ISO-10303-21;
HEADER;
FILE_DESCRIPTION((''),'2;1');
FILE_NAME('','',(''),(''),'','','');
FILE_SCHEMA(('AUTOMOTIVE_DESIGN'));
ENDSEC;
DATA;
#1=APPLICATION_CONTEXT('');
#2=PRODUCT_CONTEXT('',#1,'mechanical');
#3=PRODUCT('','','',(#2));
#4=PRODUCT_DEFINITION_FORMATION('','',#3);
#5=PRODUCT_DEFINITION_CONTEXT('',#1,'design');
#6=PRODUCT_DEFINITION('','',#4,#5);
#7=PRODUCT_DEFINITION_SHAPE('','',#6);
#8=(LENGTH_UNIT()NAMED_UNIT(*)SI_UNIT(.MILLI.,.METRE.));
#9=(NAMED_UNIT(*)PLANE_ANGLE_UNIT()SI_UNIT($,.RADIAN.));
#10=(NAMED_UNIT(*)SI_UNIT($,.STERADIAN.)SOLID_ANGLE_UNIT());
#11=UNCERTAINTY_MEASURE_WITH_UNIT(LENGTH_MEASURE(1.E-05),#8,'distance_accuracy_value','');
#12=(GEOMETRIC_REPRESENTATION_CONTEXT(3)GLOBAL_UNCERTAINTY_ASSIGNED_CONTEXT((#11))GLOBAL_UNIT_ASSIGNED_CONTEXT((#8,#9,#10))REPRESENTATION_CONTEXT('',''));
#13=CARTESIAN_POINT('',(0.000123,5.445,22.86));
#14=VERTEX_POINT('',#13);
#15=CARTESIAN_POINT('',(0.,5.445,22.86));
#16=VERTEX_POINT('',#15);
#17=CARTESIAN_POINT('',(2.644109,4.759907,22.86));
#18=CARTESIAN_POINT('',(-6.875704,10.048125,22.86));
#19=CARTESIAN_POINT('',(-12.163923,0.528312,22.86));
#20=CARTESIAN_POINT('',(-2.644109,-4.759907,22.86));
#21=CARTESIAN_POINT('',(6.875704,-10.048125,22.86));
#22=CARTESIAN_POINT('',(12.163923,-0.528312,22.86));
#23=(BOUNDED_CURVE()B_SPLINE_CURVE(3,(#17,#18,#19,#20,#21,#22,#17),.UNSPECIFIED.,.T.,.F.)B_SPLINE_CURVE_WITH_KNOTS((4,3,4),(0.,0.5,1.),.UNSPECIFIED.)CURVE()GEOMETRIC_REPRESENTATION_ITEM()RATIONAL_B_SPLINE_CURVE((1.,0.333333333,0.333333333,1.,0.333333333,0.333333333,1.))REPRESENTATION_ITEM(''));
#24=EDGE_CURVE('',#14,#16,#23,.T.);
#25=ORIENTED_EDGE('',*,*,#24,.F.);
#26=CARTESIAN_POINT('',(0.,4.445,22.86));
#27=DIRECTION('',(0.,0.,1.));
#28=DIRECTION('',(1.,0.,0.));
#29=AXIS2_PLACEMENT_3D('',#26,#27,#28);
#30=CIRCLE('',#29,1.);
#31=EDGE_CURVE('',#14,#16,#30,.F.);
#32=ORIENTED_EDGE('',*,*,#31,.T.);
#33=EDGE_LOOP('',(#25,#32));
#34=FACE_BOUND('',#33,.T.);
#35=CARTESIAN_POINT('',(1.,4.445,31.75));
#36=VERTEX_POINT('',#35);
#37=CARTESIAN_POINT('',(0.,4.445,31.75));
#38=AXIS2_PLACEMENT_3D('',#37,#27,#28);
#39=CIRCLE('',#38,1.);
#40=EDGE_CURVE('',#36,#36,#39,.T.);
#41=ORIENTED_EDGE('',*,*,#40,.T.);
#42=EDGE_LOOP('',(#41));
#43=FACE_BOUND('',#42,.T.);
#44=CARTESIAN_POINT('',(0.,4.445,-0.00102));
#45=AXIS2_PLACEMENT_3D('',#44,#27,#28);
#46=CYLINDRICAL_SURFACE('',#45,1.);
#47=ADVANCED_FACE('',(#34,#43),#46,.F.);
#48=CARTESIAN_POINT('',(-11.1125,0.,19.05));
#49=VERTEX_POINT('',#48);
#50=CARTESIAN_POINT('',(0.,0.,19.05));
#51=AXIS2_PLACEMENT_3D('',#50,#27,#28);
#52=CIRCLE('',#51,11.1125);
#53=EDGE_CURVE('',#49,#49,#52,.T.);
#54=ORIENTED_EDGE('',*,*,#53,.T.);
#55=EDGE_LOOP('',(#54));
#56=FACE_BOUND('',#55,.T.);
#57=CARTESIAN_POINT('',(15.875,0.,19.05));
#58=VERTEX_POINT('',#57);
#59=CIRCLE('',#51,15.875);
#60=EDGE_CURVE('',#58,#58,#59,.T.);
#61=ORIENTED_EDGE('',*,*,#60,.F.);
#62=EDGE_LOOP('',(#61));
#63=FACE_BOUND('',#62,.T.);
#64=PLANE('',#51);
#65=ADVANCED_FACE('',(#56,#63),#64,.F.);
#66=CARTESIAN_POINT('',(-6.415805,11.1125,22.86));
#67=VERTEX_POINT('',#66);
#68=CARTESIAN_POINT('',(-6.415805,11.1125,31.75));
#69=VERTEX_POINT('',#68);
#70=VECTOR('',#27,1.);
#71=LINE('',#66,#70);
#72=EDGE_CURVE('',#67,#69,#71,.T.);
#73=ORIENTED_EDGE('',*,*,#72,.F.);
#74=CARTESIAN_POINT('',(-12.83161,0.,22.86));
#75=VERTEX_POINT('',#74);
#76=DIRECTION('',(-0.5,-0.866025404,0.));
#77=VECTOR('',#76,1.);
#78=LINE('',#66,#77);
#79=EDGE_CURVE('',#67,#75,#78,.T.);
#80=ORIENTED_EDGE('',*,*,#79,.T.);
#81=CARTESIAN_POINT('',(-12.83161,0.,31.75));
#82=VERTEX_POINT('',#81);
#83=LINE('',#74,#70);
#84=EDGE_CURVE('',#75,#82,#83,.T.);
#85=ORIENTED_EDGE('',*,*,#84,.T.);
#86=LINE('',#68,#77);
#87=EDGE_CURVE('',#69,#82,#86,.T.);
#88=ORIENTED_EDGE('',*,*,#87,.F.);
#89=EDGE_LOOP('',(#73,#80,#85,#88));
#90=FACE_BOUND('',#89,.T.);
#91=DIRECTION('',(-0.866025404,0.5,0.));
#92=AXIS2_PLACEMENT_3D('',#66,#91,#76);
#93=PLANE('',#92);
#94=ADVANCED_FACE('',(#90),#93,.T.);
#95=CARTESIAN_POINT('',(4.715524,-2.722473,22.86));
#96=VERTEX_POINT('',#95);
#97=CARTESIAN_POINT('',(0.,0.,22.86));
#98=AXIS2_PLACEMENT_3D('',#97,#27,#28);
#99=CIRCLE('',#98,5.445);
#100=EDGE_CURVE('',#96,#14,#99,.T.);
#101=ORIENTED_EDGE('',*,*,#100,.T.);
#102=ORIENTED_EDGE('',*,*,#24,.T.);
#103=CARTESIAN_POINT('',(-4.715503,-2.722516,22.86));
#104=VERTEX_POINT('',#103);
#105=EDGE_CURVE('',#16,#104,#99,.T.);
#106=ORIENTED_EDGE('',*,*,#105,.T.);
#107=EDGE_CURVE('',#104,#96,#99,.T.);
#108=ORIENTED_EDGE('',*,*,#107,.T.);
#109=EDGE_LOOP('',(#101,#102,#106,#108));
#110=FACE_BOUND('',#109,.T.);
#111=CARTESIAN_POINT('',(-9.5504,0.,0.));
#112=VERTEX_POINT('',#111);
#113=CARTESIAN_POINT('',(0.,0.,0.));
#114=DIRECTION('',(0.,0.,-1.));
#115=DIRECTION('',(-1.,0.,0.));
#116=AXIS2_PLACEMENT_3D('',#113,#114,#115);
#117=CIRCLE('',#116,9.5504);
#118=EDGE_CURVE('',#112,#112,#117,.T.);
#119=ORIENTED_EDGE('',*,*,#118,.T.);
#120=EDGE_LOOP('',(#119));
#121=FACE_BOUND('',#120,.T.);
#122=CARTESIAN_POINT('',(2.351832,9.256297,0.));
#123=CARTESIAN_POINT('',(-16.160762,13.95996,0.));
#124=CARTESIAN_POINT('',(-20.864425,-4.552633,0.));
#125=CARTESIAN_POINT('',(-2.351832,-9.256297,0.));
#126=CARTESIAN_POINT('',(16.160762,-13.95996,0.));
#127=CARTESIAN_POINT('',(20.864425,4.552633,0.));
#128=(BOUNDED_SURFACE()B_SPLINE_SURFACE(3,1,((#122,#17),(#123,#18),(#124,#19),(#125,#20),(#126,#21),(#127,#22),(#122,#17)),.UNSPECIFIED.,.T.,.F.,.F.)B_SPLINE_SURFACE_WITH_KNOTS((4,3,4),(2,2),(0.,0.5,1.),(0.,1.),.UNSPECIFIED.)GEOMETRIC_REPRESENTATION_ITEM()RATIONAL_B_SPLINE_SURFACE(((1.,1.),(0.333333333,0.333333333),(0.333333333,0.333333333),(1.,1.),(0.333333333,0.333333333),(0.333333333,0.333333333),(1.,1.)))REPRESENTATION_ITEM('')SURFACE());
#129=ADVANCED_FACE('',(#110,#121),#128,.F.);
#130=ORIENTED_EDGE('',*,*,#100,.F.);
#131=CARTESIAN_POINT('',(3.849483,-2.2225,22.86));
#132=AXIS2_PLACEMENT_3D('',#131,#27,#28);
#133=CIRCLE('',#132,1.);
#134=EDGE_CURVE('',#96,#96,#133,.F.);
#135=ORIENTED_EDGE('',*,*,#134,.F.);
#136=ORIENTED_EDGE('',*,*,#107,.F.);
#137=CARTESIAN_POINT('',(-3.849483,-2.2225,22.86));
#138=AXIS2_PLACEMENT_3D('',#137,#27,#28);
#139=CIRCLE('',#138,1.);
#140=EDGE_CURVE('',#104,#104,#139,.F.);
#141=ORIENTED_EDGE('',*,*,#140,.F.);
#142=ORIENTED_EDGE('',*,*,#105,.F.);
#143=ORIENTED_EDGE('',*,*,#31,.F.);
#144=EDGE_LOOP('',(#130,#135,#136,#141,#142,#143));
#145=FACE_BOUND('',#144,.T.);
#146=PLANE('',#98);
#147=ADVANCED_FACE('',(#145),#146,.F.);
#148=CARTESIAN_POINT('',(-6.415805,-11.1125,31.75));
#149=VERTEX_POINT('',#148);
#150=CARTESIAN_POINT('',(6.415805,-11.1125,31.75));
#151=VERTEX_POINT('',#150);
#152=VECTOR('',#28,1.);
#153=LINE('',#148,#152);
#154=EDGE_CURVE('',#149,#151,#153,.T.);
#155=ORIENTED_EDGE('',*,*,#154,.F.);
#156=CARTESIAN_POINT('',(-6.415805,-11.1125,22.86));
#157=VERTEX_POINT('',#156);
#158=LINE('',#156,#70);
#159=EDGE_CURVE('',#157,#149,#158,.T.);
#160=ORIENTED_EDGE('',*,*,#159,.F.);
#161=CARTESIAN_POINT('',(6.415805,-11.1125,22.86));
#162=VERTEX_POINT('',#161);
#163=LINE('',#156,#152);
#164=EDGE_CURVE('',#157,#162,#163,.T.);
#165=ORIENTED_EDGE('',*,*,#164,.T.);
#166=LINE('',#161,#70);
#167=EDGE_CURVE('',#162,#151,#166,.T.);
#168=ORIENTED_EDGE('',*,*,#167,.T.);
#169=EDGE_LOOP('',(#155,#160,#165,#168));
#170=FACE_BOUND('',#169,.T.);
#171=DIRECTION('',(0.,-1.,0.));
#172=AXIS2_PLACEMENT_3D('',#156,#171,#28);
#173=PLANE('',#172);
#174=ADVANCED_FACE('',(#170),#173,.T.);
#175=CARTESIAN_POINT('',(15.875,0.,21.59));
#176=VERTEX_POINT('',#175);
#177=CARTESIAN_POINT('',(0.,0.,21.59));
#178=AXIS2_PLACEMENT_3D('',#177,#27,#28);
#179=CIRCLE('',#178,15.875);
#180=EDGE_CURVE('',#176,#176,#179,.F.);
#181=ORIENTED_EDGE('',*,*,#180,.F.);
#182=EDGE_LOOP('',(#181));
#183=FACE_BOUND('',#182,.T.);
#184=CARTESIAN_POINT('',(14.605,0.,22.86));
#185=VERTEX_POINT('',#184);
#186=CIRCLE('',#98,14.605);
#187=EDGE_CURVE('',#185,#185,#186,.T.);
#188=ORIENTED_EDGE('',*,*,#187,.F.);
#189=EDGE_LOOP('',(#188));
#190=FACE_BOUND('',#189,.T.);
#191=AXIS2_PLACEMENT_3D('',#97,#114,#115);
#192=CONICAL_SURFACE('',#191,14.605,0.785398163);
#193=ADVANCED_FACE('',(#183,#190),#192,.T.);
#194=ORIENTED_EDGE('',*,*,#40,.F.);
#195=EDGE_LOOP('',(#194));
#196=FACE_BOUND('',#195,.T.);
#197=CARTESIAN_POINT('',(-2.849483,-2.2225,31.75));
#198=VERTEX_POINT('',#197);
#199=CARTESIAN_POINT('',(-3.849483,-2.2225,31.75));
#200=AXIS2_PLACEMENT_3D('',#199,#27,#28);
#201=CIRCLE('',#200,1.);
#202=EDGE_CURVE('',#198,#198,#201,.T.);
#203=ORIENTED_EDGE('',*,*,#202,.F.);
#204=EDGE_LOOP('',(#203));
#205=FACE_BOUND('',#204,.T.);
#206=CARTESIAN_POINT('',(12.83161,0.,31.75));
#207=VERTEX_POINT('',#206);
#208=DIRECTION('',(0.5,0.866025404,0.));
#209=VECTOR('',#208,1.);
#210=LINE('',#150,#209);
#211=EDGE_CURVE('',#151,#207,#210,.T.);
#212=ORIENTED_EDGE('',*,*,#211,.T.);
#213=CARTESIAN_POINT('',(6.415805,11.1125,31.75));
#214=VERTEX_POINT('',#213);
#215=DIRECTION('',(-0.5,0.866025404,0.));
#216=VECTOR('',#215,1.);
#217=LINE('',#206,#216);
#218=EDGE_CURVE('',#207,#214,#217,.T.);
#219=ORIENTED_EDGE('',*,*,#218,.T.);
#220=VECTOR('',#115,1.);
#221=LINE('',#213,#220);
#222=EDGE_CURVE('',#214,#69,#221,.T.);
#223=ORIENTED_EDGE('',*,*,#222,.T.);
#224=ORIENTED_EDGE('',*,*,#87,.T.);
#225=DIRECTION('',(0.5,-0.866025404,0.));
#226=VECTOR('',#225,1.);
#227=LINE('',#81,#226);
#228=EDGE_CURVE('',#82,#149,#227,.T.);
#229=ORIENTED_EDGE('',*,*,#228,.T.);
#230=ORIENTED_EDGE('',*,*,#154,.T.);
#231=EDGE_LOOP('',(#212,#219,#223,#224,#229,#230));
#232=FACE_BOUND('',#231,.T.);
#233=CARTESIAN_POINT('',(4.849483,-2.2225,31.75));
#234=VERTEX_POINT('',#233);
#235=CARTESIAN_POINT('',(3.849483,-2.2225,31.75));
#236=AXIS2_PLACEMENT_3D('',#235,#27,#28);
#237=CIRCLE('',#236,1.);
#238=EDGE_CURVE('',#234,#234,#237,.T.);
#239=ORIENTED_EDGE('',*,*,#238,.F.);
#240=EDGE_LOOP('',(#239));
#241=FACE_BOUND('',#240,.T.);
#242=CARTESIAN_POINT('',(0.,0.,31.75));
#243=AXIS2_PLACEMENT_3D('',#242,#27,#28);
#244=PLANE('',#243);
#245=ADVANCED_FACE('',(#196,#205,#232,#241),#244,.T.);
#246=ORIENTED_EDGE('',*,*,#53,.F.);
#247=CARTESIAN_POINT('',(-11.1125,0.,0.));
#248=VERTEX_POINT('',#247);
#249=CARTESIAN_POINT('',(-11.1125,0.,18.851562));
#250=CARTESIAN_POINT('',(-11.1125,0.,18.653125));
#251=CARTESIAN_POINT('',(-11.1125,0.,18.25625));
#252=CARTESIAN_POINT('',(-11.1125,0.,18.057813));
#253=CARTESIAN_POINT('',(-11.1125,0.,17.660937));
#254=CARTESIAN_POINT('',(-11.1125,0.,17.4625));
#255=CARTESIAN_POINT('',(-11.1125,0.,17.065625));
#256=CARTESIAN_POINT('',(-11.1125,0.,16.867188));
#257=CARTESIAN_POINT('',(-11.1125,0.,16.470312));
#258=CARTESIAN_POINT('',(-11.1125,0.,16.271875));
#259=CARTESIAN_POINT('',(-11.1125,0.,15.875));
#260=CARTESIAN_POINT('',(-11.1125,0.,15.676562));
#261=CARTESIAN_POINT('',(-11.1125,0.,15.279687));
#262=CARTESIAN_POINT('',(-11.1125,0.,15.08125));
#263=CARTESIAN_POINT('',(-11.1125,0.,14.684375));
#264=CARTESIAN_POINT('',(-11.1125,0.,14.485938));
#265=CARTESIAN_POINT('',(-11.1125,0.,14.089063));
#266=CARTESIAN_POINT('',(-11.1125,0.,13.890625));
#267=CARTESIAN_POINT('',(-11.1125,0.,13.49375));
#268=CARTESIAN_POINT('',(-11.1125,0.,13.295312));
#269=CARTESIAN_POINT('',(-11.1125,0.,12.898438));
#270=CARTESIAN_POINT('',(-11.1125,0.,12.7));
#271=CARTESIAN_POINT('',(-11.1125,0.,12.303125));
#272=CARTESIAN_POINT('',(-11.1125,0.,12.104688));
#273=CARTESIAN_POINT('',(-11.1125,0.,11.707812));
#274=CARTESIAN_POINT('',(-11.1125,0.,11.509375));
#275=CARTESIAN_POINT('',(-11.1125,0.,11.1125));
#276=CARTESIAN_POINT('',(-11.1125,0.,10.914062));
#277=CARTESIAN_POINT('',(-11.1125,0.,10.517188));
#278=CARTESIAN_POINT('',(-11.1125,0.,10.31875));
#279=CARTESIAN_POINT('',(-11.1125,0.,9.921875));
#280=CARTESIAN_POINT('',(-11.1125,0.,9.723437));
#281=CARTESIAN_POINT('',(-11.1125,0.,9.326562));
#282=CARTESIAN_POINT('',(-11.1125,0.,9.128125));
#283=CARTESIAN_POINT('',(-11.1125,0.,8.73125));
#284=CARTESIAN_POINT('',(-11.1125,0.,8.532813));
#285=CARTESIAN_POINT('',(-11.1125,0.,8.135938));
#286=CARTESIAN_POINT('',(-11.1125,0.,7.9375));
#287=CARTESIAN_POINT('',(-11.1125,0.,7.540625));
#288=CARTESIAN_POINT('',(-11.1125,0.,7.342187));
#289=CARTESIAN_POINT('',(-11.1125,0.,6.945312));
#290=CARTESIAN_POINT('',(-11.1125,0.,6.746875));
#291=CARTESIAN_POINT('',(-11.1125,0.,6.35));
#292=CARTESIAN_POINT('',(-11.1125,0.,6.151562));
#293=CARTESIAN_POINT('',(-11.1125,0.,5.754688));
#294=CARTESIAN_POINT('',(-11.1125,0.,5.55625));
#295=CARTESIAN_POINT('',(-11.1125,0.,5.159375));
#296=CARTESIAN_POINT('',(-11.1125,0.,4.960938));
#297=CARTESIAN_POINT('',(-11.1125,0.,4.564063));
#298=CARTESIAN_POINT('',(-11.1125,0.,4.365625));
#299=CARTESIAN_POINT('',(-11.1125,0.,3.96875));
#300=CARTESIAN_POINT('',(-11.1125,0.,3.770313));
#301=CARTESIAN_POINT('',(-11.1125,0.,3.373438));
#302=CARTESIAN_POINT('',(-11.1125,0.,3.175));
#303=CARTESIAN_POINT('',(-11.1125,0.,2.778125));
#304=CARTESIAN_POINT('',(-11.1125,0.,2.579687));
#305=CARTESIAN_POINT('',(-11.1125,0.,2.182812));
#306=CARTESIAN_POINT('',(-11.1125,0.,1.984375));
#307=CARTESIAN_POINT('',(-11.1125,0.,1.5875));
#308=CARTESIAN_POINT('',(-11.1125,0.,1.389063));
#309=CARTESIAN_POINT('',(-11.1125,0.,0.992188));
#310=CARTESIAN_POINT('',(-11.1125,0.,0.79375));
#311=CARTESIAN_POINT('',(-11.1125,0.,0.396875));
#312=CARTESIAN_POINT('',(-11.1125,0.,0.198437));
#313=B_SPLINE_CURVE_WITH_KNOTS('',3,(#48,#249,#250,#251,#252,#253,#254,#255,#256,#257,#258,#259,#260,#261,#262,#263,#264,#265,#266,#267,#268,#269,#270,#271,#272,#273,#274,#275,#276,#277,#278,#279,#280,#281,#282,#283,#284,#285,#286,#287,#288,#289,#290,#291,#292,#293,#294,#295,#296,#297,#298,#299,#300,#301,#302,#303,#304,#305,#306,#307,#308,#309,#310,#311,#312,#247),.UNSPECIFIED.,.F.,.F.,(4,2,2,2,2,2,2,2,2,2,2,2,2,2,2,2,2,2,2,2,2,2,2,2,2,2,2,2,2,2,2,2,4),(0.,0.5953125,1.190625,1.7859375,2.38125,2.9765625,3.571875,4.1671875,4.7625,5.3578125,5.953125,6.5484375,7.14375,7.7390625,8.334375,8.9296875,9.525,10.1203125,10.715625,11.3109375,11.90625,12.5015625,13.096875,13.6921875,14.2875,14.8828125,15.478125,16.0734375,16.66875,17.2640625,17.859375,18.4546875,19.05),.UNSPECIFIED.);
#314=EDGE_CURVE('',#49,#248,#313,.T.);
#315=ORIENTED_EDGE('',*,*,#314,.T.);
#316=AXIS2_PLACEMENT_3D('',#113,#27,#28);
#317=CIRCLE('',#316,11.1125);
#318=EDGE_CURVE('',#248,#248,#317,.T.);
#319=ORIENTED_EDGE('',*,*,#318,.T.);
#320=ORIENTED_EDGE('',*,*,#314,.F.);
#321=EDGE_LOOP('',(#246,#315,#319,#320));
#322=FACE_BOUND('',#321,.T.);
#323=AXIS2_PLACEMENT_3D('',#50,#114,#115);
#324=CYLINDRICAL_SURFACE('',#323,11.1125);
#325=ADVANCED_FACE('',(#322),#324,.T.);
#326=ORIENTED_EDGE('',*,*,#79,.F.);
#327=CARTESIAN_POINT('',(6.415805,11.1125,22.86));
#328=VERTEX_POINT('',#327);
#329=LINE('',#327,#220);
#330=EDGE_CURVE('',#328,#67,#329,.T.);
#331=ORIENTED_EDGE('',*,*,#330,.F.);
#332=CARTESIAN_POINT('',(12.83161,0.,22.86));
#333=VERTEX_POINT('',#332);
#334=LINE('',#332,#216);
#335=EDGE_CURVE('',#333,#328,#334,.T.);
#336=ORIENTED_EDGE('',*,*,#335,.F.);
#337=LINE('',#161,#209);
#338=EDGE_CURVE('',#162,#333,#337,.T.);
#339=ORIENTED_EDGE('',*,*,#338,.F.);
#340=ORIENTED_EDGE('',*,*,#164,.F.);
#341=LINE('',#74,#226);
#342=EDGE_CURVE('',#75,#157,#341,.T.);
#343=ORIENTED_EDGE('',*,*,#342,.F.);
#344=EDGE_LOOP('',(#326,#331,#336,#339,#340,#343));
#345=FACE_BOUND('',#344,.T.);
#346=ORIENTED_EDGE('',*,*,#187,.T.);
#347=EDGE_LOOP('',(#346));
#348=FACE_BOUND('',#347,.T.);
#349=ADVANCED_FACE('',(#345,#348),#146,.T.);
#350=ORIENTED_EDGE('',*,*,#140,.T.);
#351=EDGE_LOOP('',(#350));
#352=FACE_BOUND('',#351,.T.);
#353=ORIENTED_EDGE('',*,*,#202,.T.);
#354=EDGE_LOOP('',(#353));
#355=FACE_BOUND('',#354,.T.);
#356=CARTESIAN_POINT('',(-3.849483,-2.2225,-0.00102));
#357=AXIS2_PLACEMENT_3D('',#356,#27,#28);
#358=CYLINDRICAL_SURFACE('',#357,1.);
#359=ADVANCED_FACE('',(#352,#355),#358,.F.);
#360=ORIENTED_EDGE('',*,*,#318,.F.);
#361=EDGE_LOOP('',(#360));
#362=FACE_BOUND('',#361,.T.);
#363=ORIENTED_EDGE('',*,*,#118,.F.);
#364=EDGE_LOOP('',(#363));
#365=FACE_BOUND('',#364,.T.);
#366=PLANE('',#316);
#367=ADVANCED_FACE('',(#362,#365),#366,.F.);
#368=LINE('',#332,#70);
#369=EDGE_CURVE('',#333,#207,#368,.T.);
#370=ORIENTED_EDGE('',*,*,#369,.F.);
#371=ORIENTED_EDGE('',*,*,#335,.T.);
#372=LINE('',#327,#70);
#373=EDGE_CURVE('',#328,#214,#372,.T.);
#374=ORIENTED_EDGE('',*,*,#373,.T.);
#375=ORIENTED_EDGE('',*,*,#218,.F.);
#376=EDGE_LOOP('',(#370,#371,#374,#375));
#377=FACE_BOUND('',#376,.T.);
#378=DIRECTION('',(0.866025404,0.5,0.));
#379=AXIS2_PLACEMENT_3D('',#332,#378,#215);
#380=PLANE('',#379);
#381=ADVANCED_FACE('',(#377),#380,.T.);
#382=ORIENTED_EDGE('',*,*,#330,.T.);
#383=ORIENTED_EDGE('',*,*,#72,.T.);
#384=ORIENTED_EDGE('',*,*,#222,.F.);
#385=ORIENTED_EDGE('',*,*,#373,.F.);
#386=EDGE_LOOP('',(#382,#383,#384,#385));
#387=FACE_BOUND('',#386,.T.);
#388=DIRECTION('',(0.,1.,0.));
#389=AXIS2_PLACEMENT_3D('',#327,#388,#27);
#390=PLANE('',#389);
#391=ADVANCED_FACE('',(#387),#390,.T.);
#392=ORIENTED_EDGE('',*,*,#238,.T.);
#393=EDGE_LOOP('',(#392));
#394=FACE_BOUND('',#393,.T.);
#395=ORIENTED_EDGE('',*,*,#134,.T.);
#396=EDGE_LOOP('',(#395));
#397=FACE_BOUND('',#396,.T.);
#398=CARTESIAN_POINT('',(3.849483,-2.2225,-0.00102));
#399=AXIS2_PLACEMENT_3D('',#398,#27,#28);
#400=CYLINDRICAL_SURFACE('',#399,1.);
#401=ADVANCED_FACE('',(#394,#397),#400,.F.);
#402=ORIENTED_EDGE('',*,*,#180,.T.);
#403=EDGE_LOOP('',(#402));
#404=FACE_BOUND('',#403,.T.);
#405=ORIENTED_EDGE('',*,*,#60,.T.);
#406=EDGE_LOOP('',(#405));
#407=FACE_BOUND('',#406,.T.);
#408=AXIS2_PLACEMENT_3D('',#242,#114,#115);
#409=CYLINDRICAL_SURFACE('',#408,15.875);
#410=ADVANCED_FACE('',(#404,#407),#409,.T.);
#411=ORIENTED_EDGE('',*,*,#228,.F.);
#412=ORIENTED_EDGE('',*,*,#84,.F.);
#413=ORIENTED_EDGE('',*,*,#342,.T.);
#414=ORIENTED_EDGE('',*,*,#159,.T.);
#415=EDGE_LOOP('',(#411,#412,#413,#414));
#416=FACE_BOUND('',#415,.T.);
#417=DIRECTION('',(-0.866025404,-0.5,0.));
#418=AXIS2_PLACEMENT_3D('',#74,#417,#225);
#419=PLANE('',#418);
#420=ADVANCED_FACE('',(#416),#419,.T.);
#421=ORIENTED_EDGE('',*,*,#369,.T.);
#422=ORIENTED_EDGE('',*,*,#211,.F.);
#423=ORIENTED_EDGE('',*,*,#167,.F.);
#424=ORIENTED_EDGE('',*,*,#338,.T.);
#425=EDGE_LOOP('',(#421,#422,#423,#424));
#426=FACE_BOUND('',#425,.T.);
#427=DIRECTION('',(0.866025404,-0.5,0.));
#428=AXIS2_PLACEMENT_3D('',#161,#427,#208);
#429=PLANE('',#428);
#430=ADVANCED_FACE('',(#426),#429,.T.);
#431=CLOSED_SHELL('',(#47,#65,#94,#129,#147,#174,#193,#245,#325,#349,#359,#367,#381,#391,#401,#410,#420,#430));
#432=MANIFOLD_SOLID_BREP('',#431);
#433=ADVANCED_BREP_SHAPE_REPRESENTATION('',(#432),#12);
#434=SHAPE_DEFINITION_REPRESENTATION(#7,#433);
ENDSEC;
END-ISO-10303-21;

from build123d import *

# Parameters (mm, degrees)
SKETCH1_R           = 11.1125
BOSS_EXTRUDE1_DEPTH = 19.05
SKETCH2_R           = 15.875
BOSS_EXTRUDE2_DEPTH = 12.7
CUT_EXTRUDE1_START  = -8.89
SKETCH3_R           = 15.875
CUT_EXTRUDE1_DEPTH  = 8.89
CHAMFER1_SIZE       = 1.27
CUT_EXTRUDE2_REACH  = 40.886
SKETCH4_R           = 1


with BuildPart() as part:
    # Sketch1 → Boss-Extrude1 (new body)
    with BuildSketch(Plane.XY):
        with Locations(Location((0, 0, 0), (0, 0, 180))):
            Circle(SKETCH1_R)
    extrude(amount=BOSS_EXTRUDE1_DEPTH)

    # Sketch2 → Boss-Extrude2 (add)
    with BuildSketch(Plane.XY.offset(19.05)):
        Circle(SKETCH2_R)
    extrude(amount=BOSS_EXTRUDE2_DEPTH)

    # Sketch3 → Cut-Extrude1 (cut)
    with BuildSketch(Plane.XY.offset(31.75).offset(CUT_EXTRUDE1_START)):
        Circle(SKETCH3_R)
        Polygon((12.831609733, 0), (6.415804866, 11.1125), (-6.415804866, 11.1125), (-12.831609733, 0), (-6.415804866, -11.1125), (6.415804866, -11.1125), align=None, mode=Mode.SUBTRACT)
    extrude(amount=CUT_EXTRUDE1_DEPTH, mode=Mode.SUBTRACT)

    # Chamfer1
    chamfer1_edges = [part.edges().sort_by_distance(p)[0] for p in [
        (-15.875, 0, 22.86),
    ]]
    chamfer(chamfer1_edges, length=CHAMFER1_SIZE)

    # Cut-Loft1: read off the stored shape, not the designer's step
    # Cut-Loft1: loft between two sections, ruled curve by curve
    cut_loft1_from = [
        Edge.make_bspline([(2.35183174, 9.256296648, 0), (-16.160761555, 13.959960127, 0), (-20.864425035, -4.552633168, 0), (-2.35183174, -9.256296648, 0), (16.160761555, -13.959960127, 0), (20.864425035, 4.552633168, 0), (2.35183174, 9.256296648, 0)], [0, 0, 0, 0, 0.5, 0.5, 0.5, 1, 1, 1, 1], 3, [1, 0.333333333, 0.333333333, 1, 0.333333333, 0.333333333, 1]),
    ]
    cut_loft1_to = [
        Edge.make_bspline([(2.644109425, 4.759906548, 22.86), (-6.875703672, 10.048125398, 22.86), (-12.163922522, 0.528312301, 22.86), (-2.644109425, -4.759906548, 22.86), (6.875703672, -10.048125398, 22.86), (12.163922522, -0.528312301, 22.86), (2.644109425, 4.759906548, 22.86)], [0, 0, 0, 0, 0.5, 0.5, 0.5, 1, 1, 1, 1], 3, [1, 0.333333333, 0.333333333, 1, 0.333333333, 0.333333333, 1]),
    ]
    cut_loft1 = Solid(Shell([*[Face.make_surface_from_curves(cut_loft1_from[k], cut_loft1_to[k]) for k in range(1)], Face(Wire(cut_loft1_from)), Face(Wire(cut_loft1_to))]))
    add(cut_loft1, mode=Mode.SUBTRACT)

    # Sketch4 → Cut-Extrude2 (cut, up to next)
    with BuildSketch(Plane.XY.offset(31.75), mode=Mode.PRIVATE) as cut_extrude2_sk1:
        with Locations((0, 4.445)):
            Circle(SKETCH4_R)
    cut_extrude2_tool1 = extrude(cut_extrude2_sk1.sketch, amount=-CUT_EXTRUDE2_REACH, mode=Mode.PRIVATE) & part.part
    # Sketch4 → Cut-Extrude2 (cut, up to next)
    with BuildSketch(Plane.XY.offset(31.75), mode=Mode.PRIVATE) as cut_extrude2_sk2:
        with Locations((3.84948292, -2.2225)):
            Circle(SKETCH4_R)
    cut_extrude2_tool2 = extrude(cut_extrude2_sk2.sketch, amount=-CUT_EXTRUDE2_REACH, mode=Mode.PRIVATE) & part.part
    # Sketch4 → Cut-Extrude2 (cut, up to next)
    with BuildSketch(Plane.XY.offset(31.75), mode=Mode.PRIVATE) as cut_extrude2_sk3:
        with Locations((-3.84948292, -2.2225)):
            Circle(SKETCH4_R)
    cut_extrude2_tool3 = extrude(cut_extrude2_sk3.sketch, amount=-CUT_EXTRUDE2_REACH, mode=Mode.PRIVATE) & part.part
    add(cut_extrude2_tool1.solids().sort_by_distance((0, 4.445, 31.75))[0], mode=Mode.SUBTRACT)
    add(cut_extrude2_tool2.solids().sort_by_distance((3.849483, -2.2225, 31.75))[0], mode=Mode.SUBTRACT)
    add(cut_extrude2_tool3.solids().sort_by_distance((-3.849483, -2.2225, 31.75))[0], mode=Mode.SUBTRACT)


solid = part.part
